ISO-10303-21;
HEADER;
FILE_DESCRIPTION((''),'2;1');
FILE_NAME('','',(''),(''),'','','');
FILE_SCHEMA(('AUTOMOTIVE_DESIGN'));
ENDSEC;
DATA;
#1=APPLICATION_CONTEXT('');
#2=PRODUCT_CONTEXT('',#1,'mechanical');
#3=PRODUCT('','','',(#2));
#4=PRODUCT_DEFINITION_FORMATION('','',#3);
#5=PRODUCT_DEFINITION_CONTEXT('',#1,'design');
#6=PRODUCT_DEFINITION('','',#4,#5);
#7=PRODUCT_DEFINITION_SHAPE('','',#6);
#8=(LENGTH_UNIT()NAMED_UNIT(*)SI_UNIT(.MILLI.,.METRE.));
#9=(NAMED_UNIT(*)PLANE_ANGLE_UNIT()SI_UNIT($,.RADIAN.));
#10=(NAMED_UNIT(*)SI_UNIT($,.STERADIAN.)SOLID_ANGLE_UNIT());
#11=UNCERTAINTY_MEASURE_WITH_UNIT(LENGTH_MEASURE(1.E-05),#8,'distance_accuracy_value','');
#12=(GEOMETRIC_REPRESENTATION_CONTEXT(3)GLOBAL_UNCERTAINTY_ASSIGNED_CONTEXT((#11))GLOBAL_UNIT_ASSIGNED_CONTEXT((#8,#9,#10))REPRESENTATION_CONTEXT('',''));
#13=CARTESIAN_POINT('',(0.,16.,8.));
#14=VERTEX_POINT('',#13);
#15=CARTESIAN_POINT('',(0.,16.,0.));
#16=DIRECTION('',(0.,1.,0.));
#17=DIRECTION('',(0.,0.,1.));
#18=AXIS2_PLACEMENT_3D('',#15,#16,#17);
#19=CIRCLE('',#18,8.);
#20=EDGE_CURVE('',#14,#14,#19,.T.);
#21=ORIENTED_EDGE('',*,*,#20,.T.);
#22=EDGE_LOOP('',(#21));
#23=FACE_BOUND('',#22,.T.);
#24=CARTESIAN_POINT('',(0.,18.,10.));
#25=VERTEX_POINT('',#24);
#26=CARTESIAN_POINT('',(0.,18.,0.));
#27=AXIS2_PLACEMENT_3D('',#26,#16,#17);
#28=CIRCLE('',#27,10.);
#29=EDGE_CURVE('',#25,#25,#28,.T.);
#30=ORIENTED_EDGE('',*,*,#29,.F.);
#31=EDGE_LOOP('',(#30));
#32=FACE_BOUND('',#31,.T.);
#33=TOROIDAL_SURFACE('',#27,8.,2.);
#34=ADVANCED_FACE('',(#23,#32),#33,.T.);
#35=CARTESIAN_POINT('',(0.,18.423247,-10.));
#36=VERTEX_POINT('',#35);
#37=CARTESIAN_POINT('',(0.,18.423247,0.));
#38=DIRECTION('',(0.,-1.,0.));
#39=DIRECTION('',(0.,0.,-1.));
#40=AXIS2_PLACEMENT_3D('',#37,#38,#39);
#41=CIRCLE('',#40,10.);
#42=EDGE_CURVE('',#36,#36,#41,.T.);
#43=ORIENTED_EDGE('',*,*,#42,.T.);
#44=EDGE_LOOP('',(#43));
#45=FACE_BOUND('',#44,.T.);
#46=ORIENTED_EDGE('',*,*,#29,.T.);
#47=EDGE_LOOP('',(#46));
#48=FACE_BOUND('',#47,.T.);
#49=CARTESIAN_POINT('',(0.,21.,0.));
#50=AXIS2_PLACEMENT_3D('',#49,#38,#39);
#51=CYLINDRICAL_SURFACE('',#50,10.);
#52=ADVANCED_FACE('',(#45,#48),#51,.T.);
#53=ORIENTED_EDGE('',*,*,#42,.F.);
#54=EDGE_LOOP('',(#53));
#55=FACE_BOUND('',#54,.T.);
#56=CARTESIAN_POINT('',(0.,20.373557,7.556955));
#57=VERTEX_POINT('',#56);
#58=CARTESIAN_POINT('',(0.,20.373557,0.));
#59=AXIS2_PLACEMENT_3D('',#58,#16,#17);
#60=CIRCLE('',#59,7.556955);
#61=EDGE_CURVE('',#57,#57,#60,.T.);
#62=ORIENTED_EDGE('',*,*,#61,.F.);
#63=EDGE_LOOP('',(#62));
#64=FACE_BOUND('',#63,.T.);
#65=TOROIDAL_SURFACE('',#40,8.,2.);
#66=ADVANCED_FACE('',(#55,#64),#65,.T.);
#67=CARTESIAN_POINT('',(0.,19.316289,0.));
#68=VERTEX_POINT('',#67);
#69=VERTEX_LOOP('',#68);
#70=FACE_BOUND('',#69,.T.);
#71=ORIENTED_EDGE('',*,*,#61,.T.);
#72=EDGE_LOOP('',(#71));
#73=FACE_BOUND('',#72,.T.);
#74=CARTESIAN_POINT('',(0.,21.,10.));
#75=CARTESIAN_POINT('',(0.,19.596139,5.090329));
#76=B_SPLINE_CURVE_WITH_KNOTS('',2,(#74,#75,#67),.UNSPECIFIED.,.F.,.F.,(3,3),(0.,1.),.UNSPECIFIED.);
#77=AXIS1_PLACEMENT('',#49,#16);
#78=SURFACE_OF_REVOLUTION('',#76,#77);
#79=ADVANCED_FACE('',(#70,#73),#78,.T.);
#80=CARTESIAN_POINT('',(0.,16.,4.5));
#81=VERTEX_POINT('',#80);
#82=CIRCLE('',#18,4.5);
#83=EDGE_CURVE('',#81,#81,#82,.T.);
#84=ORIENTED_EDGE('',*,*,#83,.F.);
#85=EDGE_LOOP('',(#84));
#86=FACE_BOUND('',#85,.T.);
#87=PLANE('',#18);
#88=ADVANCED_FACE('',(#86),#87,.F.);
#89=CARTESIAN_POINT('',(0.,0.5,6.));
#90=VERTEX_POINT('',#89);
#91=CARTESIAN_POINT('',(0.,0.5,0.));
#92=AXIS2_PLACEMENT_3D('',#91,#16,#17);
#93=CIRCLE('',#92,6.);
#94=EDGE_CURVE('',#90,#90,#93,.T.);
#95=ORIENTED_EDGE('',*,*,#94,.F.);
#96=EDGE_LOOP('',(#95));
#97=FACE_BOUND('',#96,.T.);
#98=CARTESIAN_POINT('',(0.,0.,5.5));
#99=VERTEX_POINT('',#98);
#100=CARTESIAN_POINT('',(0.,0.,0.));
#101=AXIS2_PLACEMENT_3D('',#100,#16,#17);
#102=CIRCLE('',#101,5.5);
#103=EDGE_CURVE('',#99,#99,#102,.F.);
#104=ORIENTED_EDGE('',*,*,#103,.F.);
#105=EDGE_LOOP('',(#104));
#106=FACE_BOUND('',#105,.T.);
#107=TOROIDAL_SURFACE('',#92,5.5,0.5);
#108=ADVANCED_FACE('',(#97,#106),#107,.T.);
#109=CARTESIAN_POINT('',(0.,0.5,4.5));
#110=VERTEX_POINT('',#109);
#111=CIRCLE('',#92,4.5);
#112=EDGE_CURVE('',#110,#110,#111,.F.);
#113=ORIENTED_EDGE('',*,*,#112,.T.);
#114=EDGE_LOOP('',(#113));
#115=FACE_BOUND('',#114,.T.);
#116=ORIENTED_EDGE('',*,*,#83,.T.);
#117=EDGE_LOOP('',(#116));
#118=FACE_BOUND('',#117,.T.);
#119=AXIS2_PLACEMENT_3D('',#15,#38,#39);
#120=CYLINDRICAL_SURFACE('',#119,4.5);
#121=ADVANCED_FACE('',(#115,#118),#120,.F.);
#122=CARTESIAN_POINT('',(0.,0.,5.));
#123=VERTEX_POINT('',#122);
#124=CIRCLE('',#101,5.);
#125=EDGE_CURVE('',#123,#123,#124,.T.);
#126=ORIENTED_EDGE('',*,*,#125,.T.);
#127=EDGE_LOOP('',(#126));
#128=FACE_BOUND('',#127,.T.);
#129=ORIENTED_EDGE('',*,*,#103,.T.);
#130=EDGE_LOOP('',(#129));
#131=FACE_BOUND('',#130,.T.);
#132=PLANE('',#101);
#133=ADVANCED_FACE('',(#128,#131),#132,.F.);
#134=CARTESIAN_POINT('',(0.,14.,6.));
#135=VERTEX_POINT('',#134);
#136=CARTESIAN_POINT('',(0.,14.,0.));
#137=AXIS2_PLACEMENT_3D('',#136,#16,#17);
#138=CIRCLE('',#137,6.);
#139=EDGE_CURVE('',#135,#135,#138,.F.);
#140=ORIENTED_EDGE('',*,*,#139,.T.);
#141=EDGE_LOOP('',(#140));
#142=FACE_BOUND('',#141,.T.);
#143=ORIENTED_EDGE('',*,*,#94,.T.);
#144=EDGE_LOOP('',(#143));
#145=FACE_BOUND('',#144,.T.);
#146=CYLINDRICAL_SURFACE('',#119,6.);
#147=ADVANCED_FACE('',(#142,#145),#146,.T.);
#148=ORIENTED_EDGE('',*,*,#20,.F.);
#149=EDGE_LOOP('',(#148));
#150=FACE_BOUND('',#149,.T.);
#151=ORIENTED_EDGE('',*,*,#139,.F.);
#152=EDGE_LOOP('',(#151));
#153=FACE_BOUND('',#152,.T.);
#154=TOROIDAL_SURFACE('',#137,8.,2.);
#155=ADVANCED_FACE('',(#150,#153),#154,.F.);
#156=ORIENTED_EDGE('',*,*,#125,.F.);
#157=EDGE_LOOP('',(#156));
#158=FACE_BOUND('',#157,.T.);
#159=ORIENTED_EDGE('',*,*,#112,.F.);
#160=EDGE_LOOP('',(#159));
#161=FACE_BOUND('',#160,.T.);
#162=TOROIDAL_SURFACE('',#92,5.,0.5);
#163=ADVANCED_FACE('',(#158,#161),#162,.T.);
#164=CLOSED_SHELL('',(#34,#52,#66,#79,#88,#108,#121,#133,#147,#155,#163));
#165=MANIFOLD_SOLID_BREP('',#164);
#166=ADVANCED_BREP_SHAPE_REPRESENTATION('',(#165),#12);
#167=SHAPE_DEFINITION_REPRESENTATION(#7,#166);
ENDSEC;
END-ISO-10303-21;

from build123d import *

# Parameters (mm, degrees)
SKETCH_1_R      = 6
SKETCH_1_R_2    = 4.5
EXTRUDE_1_DEPTH = 16
SKETCH_2_R      = 10
EXTRUDE_2_DEPTH = 5
FILLET_1_R      = 2
FILLET_2_R      = 0.5


with BuildPart() as part:
    # 草圖1 → 填料-伸長1 (new body)
    with BuildSketch(Plane(origin=(0, 0, 0), x_dir=(1, 0, 0), z_dir=(0, 1, 0))):
        with Locations(Location((0, 0, 0), (0, 0, 270))):
            Circle(SKETCH_1_R)
        with Locations(Location((0, 0, 0), (0, 0, 270))):
            Circle(SKETCH_1_R_2, mode=Mode.SUBTRACT)
    extrude(amount=EXTRUDE_1_DEPTH)

    # 草圖2 → 填料-伸長2 (add)
    with BuildSketch(Plane(origin=(0, 16, 0), x_dir=(1, 0, 0), z_dir=(0, 1, 0))):
        with Locations(Location((0, 0, 0), (0, 0, 270))):
            Circle(SKETCH_2_R)
    extrude(amount=EXTRUDE_2_DEPTH)

    # 草圖3 → 除料-旋轉1 (revolve, cut)
    with BuildSketch(Plane(origin=(0, 0, 0), x_dir=(0, 0, -1), z_dir=(1, 0, 0))):
        with BuildLine():
            Line((0, 21), (0, 19.316289144))
            add(Edge.make_bspline(
                [(-10, 21), (-5.090329438, 19.596139372), (0, 19.316289144)],
                knots=[0, 0, 0, 1, 1, 1], degree=2))
            Line((-10, 21), (0, 21))
        make_face()
    revolve(axis=Axis((0, 21, 0), (0, -1, 0)), mode=Mode.SUBTRACT)

    # 圓角1
    fillet_1_edges = [part.edges().sort_by_distance(p)[0] for p in [
        (0, 21, -10),
        (0, 16, -6),
        (0, 16, -10),
    ]]
    fillet(fillet_1_edges, radius=FILLET_1_R - 0.0001)  # a hair under: the kernel refuses the full size

    # 圓角2
    fillet_2_edges = [part.edges().sort_by_distance(p)[0] for p in [
        (0, 0, -6),
        (0, 0, -4.5),
    ]]
    fillet(fillet_2_edges, radius=FILLET_2_R)


solid = part.part
